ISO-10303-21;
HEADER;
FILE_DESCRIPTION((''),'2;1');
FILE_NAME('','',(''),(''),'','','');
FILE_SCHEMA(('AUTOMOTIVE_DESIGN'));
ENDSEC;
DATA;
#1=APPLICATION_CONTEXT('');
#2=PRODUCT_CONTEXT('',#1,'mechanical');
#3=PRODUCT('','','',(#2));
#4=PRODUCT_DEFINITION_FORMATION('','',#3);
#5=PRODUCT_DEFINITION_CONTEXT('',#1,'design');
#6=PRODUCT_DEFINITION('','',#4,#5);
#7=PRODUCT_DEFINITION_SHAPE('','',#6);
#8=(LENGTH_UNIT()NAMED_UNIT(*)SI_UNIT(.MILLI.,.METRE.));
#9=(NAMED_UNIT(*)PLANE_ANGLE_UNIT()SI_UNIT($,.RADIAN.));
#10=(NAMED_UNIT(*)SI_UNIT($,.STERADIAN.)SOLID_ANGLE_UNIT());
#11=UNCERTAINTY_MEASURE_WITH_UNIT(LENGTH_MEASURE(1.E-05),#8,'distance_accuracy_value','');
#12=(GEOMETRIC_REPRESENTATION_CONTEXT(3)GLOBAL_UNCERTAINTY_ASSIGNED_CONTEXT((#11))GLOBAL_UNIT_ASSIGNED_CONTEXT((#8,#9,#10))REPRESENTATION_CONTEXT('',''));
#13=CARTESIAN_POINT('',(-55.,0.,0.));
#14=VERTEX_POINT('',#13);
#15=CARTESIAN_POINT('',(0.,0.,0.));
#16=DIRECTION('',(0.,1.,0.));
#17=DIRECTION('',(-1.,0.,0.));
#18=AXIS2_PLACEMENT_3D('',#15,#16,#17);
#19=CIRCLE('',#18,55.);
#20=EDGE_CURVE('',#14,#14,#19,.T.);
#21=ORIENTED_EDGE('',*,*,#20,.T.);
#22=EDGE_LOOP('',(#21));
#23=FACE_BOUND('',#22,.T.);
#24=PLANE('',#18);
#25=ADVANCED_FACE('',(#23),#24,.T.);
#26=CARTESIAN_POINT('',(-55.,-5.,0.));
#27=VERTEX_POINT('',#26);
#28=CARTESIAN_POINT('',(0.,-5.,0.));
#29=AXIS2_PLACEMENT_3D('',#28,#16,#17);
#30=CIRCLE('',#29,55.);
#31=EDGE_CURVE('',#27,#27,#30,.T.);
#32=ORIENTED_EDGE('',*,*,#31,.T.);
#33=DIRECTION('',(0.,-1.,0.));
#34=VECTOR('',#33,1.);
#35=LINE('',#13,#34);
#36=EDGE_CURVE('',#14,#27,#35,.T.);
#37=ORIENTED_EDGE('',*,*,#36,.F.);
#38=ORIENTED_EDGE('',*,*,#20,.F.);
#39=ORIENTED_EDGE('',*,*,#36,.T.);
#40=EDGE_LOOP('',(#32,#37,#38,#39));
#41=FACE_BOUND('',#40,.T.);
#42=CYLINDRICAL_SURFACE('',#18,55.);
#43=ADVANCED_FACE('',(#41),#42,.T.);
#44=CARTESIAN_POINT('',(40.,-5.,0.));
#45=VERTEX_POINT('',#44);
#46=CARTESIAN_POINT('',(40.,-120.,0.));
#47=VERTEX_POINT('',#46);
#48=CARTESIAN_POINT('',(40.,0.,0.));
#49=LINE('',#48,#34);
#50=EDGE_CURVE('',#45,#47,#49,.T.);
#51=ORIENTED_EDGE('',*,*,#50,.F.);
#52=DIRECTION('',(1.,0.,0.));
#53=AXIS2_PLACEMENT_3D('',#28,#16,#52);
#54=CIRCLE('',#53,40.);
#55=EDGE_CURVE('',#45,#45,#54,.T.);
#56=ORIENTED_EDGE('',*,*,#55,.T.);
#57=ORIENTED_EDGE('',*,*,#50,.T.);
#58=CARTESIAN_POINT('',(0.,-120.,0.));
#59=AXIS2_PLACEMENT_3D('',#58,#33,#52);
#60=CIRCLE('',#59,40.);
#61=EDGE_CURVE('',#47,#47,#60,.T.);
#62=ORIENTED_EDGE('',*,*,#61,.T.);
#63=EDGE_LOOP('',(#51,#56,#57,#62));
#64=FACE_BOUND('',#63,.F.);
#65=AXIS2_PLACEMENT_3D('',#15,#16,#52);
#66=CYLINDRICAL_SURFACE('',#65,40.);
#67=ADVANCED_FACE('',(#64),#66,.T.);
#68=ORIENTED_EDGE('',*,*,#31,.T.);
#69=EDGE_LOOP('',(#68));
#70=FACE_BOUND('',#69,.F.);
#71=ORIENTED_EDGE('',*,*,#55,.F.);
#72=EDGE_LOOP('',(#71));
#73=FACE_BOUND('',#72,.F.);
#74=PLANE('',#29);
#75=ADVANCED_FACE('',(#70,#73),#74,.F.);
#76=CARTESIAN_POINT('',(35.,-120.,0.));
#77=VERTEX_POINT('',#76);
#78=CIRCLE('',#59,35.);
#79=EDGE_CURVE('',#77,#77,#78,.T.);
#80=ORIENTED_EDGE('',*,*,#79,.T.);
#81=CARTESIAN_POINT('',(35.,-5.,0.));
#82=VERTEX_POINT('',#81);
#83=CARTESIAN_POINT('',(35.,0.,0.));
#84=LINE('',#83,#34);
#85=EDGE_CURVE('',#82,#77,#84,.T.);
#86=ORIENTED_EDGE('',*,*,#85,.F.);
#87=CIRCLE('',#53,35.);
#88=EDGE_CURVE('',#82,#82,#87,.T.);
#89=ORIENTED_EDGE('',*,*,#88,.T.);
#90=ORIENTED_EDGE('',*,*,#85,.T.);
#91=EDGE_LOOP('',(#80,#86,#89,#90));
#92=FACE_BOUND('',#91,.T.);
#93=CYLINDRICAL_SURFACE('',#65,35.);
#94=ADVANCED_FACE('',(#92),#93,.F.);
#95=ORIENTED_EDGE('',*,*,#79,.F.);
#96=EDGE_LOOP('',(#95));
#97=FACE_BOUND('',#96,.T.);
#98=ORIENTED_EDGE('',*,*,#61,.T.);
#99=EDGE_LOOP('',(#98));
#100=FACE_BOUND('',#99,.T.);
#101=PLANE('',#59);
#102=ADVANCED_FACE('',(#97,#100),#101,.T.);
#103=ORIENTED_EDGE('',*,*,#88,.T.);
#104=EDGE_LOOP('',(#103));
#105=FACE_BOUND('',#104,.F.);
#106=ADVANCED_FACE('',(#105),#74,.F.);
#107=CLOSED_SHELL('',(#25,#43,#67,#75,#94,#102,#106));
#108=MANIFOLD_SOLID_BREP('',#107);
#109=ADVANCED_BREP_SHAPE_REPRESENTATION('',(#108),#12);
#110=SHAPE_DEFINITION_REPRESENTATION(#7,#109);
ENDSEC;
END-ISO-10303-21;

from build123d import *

# Parameters (mm, degrees)
F0_R     = 40
F0_R_2   = 35
F1_DEPTH = 120
F2_R     = 55
F2_R_2   = 40
F2_R_3   = 35
F3_DEPTH = 5


with BuildPart() as f1:
    # F0 (on Front) → F1 (new body)
    with BuildSketch(Plane.XZ):
        Circle(F0_R)
        Circle(F0_R_2, mode=Mode.SUBTRACT)
    extrude(amount=F1_DEPTH)

    # F2 (on face) → F3 (join)
    with BuildSketch(Plane(origin=(0, 0, 0), x_dir=(-1, 0, 0), z_dir=(0, 1, 0))):
        Circle(F2_R)
        Circle(F2_R_2, mode=Mode.SUBTRACT)
        Circle(F2_R_2)
        Circle(F2_R_3, mode=Mode.SUBTRACT)
        Circle(F2_R_3)
    extrude(amount=-F3_DEPTH)


solid = f1.part
